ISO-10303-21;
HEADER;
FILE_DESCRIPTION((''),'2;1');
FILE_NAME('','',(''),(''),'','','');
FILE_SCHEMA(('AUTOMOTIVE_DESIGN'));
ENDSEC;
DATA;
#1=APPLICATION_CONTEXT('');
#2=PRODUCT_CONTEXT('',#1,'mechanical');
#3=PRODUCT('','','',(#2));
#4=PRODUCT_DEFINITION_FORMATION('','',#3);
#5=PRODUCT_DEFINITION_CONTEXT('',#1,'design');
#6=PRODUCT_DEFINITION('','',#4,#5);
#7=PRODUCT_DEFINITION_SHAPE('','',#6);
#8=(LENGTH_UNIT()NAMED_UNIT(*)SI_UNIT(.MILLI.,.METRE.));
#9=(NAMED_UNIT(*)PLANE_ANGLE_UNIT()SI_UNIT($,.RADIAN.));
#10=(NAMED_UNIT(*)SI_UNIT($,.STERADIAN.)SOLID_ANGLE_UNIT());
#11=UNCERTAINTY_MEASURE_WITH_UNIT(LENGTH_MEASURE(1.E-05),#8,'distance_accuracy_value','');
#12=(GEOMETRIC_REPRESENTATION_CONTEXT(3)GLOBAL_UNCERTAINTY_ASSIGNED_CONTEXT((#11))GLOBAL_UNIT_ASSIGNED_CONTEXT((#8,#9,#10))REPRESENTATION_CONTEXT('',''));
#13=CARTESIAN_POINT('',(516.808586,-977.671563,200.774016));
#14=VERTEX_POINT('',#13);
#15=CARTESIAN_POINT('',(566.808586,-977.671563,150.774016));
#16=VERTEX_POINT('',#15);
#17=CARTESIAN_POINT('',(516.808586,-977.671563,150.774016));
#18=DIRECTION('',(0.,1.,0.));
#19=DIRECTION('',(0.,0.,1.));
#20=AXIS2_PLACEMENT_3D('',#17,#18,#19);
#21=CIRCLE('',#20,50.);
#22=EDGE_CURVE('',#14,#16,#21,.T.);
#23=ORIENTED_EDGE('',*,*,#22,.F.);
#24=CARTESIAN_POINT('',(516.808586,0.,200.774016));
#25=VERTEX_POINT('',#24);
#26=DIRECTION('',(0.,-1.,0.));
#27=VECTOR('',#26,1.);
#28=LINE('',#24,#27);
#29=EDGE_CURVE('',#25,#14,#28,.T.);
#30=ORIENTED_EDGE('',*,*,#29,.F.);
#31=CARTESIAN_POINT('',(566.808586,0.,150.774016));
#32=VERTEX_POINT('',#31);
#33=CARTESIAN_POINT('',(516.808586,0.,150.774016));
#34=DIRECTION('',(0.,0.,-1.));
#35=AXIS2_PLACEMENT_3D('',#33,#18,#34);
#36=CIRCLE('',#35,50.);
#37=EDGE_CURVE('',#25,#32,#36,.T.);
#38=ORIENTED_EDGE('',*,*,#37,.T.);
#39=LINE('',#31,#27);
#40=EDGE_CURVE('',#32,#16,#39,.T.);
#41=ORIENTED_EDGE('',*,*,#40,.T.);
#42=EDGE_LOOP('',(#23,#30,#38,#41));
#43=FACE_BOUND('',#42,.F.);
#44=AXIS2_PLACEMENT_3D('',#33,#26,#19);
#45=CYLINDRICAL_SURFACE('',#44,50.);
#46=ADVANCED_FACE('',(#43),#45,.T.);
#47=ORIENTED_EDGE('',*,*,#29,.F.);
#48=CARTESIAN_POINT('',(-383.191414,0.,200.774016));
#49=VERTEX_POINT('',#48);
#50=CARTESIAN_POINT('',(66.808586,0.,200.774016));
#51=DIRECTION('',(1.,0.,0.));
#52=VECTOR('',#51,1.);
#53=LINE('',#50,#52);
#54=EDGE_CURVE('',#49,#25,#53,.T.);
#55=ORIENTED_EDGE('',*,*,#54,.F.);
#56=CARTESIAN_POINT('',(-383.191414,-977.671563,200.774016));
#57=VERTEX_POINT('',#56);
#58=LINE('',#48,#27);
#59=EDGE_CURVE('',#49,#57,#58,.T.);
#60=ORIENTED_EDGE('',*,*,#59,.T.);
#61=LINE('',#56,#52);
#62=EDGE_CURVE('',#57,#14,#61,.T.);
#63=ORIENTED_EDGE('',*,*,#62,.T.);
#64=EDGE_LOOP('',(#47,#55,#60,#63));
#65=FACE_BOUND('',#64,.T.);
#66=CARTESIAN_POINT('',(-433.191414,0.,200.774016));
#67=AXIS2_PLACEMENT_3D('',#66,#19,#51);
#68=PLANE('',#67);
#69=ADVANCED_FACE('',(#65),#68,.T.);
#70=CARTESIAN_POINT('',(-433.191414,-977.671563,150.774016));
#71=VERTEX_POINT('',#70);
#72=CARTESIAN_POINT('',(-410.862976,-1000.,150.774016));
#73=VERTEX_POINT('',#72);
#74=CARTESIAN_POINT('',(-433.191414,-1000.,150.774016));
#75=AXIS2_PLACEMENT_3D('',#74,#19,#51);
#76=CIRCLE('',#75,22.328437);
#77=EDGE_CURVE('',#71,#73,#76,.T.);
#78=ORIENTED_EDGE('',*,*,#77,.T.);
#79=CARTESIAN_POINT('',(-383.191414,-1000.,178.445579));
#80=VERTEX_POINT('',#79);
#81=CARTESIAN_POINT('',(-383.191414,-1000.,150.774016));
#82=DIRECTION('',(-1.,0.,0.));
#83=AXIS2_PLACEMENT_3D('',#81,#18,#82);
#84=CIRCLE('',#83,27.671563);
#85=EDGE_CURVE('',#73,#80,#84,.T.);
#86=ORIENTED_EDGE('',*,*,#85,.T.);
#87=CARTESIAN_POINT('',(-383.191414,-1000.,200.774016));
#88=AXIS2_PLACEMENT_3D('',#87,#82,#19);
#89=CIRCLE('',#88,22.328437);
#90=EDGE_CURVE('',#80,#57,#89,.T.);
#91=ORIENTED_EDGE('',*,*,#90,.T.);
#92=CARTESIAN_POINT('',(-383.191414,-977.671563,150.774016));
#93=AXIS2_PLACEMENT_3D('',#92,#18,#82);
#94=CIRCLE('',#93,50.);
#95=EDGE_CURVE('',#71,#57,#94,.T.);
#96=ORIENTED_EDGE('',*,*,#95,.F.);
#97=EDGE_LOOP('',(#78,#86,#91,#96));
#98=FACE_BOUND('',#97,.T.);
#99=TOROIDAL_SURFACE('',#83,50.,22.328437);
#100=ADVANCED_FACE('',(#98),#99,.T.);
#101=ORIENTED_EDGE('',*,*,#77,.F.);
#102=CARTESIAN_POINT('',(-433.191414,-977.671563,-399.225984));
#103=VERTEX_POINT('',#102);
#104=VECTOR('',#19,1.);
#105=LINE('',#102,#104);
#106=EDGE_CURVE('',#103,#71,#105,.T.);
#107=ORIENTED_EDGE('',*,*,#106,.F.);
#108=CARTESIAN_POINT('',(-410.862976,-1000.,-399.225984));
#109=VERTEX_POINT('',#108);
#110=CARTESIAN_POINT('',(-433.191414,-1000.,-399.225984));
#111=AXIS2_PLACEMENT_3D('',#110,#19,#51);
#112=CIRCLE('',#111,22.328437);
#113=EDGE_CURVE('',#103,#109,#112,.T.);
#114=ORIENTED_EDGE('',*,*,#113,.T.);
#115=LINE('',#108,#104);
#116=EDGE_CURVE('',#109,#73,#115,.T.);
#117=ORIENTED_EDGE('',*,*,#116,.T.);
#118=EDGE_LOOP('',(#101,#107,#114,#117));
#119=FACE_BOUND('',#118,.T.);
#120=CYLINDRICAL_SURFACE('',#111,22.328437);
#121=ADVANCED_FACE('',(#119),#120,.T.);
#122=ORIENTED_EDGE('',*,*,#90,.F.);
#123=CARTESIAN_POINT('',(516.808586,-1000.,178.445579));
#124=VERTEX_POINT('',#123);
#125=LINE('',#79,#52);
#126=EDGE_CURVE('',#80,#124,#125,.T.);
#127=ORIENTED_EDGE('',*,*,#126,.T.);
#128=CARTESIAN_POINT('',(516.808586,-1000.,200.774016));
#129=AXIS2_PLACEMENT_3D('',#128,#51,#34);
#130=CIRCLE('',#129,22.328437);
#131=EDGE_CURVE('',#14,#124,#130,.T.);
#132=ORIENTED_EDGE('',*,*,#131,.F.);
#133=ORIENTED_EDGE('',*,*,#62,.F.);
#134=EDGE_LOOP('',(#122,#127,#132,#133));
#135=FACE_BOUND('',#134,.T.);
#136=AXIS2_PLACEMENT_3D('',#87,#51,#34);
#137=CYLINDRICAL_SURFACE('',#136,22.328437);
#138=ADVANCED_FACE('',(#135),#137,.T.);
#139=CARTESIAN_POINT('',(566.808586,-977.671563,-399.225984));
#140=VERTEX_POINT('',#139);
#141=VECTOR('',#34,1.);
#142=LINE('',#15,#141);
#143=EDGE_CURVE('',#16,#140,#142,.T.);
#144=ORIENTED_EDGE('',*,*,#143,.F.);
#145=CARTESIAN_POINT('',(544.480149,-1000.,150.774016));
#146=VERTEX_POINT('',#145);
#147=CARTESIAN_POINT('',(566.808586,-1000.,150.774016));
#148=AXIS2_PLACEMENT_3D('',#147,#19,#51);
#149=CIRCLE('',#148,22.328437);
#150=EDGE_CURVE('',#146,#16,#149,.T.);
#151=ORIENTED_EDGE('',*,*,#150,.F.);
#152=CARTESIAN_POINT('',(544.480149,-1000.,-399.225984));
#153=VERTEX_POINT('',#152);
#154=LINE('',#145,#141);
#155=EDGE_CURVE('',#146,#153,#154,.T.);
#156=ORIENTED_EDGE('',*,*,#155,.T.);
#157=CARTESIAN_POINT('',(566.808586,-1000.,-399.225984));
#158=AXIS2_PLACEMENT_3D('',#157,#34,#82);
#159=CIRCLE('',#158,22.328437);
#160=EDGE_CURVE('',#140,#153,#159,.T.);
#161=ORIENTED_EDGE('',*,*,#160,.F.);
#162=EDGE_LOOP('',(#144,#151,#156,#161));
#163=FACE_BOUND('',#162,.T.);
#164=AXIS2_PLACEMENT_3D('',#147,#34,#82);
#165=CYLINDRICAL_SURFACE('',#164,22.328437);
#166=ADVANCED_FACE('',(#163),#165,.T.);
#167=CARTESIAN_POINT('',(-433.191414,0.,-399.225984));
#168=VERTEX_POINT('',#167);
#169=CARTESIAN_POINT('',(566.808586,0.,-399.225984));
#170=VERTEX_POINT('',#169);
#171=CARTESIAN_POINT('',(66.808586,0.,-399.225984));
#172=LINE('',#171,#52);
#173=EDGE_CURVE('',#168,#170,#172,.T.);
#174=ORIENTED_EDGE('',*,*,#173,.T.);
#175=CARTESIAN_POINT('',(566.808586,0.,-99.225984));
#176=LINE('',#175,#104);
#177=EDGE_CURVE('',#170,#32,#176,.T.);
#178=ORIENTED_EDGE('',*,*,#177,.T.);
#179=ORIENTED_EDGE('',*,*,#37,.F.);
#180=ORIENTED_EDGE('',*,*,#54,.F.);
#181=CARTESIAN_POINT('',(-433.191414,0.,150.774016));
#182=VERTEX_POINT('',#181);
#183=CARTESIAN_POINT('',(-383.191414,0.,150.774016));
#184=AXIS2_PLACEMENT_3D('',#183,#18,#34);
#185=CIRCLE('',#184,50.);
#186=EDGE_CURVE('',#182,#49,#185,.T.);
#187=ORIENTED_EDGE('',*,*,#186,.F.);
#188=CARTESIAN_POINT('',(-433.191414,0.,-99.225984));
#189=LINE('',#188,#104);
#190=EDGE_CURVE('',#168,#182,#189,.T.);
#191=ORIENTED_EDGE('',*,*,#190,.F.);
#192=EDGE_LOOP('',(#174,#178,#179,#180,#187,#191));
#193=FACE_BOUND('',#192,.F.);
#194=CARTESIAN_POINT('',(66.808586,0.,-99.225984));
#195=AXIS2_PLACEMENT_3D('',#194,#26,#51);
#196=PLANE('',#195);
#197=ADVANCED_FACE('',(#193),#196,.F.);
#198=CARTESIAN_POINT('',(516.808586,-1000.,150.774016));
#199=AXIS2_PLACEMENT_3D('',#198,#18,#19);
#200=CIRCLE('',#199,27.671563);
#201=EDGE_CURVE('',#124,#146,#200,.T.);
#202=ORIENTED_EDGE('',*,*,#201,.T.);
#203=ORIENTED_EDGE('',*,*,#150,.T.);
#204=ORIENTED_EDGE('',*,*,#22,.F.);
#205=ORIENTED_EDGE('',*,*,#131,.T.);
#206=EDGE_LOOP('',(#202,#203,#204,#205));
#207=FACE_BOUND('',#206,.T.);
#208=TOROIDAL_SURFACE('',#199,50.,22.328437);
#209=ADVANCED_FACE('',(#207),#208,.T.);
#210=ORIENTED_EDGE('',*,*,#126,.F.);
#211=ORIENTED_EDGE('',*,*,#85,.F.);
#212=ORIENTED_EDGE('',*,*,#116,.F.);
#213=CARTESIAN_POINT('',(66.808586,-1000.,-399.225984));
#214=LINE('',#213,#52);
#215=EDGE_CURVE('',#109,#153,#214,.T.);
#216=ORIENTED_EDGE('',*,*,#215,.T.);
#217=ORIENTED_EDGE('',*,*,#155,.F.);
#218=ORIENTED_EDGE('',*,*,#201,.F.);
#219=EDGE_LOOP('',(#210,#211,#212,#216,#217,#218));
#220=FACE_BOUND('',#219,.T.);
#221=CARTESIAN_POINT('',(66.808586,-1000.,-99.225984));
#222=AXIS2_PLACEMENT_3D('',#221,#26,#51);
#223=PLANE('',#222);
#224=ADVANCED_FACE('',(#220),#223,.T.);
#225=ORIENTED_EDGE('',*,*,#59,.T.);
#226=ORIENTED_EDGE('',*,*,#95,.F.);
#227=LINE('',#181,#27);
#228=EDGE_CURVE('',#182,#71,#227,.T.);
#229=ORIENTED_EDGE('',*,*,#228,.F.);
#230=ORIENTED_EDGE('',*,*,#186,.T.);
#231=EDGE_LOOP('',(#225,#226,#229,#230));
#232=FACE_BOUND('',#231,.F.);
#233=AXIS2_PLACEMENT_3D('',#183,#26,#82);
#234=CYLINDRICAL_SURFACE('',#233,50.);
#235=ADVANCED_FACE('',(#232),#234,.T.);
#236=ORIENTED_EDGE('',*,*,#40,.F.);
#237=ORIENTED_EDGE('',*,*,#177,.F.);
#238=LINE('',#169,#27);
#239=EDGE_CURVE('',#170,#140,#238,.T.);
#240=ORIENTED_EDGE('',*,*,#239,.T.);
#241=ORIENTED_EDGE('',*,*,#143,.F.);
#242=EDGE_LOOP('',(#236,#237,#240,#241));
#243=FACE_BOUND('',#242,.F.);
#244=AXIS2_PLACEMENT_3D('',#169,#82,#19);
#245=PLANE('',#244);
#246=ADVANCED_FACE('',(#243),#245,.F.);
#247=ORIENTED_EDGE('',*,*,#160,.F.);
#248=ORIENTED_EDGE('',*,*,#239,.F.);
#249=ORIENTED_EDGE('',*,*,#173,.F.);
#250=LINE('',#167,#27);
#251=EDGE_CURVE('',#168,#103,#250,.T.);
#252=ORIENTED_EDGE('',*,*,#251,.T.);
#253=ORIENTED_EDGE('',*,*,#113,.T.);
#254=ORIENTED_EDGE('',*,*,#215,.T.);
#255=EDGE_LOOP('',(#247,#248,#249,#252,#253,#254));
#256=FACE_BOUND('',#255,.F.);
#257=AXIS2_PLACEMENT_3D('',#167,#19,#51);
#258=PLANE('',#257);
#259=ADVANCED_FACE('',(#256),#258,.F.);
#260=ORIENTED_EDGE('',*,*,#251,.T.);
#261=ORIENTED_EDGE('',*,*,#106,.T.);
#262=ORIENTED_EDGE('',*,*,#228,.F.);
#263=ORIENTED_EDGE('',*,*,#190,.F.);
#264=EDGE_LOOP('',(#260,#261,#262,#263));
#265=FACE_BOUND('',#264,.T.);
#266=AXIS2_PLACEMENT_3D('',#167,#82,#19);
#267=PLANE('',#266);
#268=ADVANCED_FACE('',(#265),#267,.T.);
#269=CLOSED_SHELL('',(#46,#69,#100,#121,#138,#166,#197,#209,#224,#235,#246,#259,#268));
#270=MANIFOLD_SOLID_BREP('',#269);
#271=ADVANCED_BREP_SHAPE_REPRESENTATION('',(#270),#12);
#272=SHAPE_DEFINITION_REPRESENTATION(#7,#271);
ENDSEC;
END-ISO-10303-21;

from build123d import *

# Parameters (mm, degrees)
F0_W     = 1000
F0_H     = 600
F1_DEPTH = 1000
F2_R     = 50
F3_R     = 50


with BuildPart() as f1:
    # F0 (on Front) → F1 (new body)
    with BuildSketch(Plane.XZ):
        with Locations((66.8085864745, -99.2259835054)):
            Rectangle(F0_W, F0_H)
    extrude(amount=F1_DEPTH)

    # F2
    f2_edges = [f1.edges().sort_by_distance(p)[0] for p in [
        (-433.191414, -500, 200.774016),
    ]]
    fillet(f2_edges, radius=F2_R)

    # F3
    f3_edges = [f1.edges().sort_by_distance(p)[0] for p in [
        (566.808586, -500, 200.774016),
    ]]
    fillet(f3_edges, radius=F3_R)

    # F5: sweep along a path in F5_path
    with BuildLine(Plane(origin=(-433.1914135255, -1000, -399.2259835054), x_dir=(0, 0, 1), z_dir=(0, -1, 0))) as f5_path:
        Line((0, 0), (550, 0))
        ThreePointArc((550, 0), (585.3553390593, -14.6446609407), (600, -50))
        Line((600, -50), (600, -950))
        ThreePointArc((600, -950), (585.3553390593, -985.3553390593), (550, -1000))
        Line((550, -1000), (0, -1000))
    # F4 (on face) → F5 (sweep)
    with BuildSketch(Plane(origin=(0, 0, -399.2259835054), x_dir=(1, 0, 0), z_dir=(0, 0, -1))):
        with BuildLine():
            ThreePointArc((-433.1914135255, 977.6715629095), (-417.4028242455, 984.21141072), (-410.862976435, 1000))
            Line((-410.862976435, 1000), (-433.1914135255, 1000))
            Line((-433.1914135255, 1000), (-433.1914135255, 977.6715629095))
        make_face()
        with BuildLine():
            Line((-433.1914135255, 1000), (-410.862976435, 1000))
            ThreePointArc((-410.862976435, 1000), (-448.9800028055, 1015.78858928), (-433.1914135255, 977.6715629095))
            Line((-433.1914135255, 977.6715629095), (-433.1914135255, 1000))
        make_face()
    sweep(path=f5_path.line)


solid = f1.part
